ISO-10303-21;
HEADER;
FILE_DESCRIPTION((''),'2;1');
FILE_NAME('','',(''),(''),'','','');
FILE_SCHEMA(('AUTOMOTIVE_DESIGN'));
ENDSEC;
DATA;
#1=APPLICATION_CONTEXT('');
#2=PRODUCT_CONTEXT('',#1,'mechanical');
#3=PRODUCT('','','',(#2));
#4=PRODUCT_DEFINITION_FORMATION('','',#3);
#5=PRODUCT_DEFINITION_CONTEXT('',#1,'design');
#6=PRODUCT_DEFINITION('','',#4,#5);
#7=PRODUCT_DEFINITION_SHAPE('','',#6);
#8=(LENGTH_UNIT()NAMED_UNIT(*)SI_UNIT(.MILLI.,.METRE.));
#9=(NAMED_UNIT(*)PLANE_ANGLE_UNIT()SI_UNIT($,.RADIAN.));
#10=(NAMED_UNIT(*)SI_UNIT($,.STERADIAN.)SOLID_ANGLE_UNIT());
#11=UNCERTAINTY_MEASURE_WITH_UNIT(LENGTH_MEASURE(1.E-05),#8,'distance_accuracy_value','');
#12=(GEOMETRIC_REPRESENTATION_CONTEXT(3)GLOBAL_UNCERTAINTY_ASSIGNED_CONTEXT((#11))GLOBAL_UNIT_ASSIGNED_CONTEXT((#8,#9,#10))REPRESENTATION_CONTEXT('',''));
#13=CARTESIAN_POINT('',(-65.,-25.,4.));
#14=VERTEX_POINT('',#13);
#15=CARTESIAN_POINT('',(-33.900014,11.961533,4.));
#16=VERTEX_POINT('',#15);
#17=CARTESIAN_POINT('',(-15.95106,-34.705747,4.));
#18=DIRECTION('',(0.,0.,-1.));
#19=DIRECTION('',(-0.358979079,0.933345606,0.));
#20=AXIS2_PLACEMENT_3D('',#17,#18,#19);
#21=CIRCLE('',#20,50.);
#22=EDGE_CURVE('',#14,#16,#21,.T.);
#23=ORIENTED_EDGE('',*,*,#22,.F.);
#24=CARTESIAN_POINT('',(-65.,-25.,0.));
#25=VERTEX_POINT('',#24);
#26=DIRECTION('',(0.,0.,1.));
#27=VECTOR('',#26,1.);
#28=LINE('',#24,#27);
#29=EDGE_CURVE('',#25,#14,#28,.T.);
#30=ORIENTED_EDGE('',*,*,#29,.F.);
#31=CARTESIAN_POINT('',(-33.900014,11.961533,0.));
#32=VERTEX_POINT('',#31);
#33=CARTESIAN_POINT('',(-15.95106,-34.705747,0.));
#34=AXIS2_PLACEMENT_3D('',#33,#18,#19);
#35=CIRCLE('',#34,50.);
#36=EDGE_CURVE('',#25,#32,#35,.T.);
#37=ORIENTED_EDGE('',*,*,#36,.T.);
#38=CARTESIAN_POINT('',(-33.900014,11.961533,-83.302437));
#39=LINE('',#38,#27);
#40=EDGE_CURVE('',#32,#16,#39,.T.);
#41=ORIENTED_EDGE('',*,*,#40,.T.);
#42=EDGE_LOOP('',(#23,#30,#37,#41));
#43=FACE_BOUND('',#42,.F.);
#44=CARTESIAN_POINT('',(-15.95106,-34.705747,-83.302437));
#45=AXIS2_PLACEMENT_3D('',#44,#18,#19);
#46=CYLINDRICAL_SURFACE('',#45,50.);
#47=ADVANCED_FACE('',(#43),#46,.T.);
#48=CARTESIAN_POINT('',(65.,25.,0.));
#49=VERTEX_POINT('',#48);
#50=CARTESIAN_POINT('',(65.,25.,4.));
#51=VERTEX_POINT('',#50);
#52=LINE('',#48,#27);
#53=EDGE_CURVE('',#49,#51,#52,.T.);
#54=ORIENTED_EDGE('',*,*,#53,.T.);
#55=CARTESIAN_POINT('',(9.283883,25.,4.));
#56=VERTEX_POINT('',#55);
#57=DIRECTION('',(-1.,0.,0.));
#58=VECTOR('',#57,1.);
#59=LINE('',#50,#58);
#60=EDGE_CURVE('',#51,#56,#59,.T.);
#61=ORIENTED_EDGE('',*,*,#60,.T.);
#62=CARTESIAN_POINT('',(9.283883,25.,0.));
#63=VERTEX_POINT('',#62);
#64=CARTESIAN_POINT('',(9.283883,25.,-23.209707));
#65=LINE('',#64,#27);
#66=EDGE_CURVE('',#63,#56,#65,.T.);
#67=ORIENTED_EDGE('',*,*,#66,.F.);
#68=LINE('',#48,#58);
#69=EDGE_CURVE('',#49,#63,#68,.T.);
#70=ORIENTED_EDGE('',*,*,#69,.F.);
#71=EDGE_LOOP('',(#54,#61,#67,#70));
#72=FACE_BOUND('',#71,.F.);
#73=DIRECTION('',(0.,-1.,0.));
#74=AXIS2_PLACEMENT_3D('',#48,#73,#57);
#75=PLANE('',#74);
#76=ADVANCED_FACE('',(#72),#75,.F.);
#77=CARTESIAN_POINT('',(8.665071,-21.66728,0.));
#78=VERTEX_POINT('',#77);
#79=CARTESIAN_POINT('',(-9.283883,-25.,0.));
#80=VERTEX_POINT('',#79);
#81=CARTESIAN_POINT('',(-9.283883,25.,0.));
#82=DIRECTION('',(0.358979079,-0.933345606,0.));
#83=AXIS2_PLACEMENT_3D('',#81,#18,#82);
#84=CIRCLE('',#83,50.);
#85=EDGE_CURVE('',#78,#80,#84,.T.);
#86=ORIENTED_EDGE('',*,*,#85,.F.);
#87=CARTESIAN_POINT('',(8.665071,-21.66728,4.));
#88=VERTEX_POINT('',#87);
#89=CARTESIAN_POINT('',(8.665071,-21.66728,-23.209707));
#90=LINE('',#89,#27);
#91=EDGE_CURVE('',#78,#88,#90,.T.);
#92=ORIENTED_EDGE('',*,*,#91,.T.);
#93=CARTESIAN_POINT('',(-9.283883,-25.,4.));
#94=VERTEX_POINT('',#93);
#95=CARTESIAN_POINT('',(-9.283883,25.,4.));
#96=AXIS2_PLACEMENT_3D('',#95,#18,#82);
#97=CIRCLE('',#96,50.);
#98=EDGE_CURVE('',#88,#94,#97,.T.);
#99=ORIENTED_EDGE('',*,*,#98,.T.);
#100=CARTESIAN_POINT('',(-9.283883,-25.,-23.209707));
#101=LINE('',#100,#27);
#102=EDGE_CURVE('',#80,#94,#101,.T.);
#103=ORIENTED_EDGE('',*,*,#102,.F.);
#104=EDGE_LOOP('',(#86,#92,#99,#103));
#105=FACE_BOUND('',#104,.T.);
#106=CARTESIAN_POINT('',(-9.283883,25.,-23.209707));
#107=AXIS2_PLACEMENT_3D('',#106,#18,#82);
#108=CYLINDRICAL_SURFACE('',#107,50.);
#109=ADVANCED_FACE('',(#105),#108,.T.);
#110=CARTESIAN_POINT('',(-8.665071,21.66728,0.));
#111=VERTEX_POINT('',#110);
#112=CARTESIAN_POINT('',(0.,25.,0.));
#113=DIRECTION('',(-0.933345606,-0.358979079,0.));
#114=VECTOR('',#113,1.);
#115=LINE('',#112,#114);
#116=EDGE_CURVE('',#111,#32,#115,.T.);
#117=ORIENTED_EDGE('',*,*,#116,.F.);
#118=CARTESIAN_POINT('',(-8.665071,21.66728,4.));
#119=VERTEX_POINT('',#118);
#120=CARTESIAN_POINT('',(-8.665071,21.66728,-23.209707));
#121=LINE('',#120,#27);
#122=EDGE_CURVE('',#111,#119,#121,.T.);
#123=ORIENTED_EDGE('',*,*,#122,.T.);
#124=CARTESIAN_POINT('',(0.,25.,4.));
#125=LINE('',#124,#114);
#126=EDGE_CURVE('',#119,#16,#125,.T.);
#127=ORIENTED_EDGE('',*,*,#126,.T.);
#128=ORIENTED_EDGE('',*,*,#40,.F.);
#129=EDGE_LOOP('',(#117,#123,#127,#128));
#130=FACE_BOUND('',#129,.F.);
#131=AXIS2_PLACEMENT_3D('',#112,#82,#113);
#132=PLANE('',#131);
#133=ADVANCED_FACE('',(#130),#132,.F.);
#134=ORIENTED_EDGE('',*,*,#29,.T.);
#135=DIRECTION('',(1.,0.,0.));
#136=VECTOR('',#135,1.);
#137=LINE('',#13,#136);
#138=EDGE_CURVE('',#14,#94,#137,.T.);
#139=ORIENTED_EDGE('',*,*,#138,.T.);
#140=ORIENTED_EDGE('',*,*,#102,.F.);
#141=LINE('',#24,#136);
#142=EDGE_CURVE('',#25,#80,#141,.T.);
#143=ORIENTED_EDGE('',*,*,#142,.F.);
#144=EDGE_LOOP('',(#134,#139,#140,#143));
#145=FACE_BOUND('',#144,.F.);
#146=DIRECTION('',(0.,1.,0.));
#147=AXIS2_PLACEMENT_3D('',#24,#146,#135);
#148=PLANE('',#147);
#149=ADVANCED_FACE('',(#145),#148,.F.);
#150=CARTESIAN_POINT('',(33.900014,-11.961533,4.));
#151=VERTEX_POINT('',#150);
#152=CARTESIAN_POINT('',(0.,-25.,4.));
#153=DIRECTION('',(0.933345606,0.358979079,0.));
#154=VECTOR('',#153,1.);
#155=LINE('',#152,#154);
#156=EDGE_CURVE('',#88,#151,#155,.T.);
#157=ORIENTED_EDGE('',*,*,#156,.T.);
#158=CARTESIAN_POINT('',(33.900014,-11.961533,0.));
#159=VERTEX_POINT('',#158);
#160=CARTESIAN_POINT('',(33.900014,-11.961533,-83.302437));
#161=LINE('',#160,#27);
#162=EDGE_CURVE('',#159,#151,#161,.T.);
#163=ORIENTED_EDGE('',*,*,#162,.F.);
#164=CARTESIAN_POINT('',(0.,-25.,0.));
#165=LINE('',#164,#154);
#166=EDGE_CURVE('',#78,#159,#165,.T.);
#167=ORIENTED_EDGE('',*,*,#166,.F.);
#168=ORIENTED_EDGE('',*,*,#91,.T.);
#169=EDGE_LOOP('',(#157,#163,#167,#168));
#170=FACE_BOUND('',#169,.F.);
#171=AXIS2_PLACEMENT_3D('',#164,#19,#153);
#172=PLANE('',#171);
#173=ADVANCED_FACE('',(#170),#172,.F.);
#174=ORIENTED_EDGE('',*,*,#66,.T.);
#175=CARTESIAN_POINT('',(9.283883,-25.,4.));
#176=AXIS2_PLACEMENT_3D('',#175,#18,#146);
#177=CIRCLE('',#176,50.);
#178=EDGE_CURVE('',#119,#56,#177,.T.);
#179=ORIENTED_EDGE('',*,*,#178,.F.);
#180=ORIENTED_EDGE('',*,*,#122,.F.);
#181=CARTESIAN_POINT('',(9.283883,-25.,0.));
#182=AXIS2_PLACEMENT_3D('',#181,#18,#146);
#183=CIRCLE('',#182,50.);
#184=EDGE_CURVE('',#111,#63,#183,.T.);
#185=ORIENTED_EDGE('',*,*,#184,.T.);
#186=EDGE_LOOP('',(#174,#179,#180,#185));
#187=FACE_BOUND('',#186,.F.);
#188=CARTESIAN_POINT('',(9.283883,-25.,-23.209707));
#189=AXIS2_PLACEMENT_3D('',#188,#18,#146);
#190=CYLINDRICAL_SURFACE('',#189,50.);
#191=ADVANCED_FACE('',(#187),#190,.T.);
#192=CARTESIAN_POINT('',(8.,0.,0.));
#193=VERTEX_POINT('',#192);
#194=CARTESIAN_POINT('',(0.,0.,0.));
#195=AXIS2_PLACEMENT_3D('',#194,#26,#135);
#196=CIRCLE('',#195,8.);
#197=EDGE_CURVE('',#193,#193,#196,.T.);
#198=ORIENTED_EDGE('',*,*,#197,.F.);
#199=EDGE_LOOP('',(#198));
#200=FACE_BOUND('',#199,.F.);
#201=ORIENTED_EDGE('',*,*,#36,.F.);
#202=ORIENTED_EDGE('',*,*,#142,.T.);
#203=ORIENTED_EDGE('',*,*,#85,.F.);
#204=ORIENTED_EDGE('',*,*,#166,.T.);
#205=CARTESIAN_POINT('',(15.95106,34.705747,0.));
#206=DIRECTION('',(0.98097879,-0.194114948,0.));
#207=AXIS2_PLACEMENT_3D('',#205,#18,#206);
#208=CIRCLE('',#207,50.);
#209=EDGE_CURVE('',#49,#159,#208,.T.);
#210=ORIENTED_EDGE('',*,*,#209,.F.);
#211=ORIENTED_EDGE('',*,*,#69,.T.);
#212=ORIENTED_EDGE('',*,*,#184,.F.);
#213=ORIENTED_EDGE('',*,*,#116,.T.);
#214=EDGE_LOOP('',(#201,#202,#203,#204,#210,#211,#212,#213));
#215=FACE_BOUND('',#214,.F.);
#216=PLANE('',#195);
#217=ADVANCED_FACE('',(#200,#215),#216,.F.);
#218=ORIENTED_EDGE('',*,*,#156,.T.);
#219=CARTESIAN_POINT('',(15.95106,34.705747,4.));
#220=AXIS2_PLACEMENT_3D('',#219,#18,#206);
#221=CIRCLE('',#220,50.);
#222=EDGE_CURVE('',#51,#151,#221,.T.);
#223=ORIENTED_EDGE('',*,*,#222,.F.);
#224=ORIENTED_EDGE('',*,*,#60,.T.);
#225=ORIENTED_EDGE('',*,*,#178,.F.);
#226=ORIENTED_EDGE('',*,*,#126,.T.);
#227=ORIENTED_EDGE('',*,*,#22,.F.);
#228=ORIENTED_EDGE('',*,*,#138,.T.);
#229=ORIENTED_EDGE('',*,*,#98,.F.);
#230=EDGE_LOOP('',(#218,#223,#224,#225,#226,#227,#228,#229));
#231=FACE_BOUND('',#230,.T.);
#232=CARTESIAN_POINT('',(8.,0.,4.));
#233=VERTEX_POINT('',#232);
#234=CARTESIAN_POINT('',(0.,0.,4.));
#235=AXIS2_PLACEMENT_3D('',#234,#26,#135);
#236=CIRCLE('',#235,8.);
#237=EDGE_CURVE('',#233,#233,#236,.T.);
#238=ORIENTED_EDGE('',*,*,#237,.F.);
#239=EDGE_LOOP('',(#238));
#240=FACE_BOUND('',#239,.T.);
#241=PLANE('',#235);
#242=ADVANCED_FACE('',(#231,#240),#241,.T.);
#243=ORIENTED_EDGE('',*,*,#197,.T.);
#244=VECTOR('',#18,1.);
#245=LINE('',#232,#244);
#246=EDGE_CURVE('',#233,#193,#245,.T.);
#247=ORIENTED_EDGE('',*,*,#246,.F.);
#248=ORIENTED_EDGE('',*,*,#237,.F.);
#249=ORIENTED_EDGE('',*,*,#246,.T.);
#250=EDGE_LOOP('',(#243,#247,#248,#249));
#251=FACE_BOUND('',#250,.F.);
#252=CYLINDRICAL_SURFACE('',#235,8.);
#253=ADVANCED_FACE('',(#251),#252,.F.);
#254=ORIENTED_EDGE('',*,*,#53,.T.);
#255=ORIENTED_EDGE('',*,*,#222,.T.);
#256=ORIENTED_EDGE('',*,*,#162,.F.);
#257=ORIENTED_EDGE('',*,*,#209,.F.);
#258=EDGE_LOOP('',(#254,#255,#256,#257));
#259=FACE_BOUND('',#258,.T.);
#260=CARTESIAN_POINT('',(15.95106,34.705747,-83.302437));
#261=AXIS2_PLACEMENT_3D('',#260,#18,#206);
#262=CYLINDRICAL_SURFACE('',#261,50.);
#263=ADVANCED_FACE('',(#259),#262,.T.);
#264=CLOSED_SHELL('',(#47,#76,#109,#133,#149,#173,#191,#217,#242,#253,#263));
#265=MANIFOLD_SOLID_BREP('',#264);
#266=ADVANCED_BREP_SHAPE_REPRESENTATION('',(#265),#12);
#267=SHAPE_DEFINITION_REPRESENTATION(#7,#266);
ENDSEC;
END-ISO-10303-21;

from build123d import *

# Parameters (mm, degrees)
F1_DEPTH    = 4
F2_R        = 8
F3_DEPTH    = 25
F4_T1_DEPTH = 50.4194138592
F4_T3_DEPTH = 170.6048746571


# Not quite as in the source:
# - a fillet or chamfer that OpenCascade refuses, or shapes differently, is made with other operations: its cross-section is extruded or revolved along the edge and cut away or added


with BuildPart() as f1:
    # F0 (on Top) → F1 (new body)
    with BuildSketch(Plane.XY):
        Polygon((65, 0), (65, 25), (0, 25), (-65, 0), (-65, -25), (0, -25), align=None)
    extrude(amount=F1_DEPTH)

    # F2 (on face) → F3 (cut)
    with BuildSketch(Plane.XY.offset(4)):
        Circle(F2_R)
    extrude(amount=-F3_DEPTH, mode=Mode.SUBTRACT)

    # F4: fillet of radius 50 on 4 edges, made by hand

    # F4_s2 → F4_t1 (cut)
    with BuildSketch(Plane.XY.offset(-23.2097069296)):
        with BuildLine():
            ThreePointArc((8.6650711936, -21.6672803102), (-0.1560137847, -24.1597600457), (-9.2838827718, -25))
            Line((-9.2838827718, -25), (0, -25))
            Line((0, -25), (8.6650711936, -21.6672803102))
        make_face()
        with BuildLine():
            ThreePointArc((9.2838827718, 25), (0.1560137847, 24.1597600457), (-8.6650711936, 21.6672803102))
            Line((-8.6650711936, 21.6672803102), (0, 25))
            Line((0, 25), (9.2838827718, 25))
        make_face()
    extrude(amount=F4_T1_DEPTH, mode=Mode.SUBTRACT)

    # F4_s4 → F4_t3 (cut)
    with BuildSketch(Plane.XY.offset(-83.3024373285)):
        with BuildLine():
            ThreePointArc((-33.9000144534, 11.9615329026), (-54.209630263, -2.5144156742), (-65, -25))
            Line((-65, -25), (-65, 0))
            Line((-65, 0), (-33.9000144534, 11.9615329026))
        make_face()
        with BuildLine():
            ThreePointArc((65, 25), (54.209630263, 2.5144156742), (33.9000144534, -11.9615329026))
            Line((33.9000144534, -11.9615329026), (65, 0))
            Line((65, 0), (65, 25))
        make_face()
    extrude(amount=F4_T3_DEPTH, mode=Mode.SUBTRACT)


solid = f1.part
